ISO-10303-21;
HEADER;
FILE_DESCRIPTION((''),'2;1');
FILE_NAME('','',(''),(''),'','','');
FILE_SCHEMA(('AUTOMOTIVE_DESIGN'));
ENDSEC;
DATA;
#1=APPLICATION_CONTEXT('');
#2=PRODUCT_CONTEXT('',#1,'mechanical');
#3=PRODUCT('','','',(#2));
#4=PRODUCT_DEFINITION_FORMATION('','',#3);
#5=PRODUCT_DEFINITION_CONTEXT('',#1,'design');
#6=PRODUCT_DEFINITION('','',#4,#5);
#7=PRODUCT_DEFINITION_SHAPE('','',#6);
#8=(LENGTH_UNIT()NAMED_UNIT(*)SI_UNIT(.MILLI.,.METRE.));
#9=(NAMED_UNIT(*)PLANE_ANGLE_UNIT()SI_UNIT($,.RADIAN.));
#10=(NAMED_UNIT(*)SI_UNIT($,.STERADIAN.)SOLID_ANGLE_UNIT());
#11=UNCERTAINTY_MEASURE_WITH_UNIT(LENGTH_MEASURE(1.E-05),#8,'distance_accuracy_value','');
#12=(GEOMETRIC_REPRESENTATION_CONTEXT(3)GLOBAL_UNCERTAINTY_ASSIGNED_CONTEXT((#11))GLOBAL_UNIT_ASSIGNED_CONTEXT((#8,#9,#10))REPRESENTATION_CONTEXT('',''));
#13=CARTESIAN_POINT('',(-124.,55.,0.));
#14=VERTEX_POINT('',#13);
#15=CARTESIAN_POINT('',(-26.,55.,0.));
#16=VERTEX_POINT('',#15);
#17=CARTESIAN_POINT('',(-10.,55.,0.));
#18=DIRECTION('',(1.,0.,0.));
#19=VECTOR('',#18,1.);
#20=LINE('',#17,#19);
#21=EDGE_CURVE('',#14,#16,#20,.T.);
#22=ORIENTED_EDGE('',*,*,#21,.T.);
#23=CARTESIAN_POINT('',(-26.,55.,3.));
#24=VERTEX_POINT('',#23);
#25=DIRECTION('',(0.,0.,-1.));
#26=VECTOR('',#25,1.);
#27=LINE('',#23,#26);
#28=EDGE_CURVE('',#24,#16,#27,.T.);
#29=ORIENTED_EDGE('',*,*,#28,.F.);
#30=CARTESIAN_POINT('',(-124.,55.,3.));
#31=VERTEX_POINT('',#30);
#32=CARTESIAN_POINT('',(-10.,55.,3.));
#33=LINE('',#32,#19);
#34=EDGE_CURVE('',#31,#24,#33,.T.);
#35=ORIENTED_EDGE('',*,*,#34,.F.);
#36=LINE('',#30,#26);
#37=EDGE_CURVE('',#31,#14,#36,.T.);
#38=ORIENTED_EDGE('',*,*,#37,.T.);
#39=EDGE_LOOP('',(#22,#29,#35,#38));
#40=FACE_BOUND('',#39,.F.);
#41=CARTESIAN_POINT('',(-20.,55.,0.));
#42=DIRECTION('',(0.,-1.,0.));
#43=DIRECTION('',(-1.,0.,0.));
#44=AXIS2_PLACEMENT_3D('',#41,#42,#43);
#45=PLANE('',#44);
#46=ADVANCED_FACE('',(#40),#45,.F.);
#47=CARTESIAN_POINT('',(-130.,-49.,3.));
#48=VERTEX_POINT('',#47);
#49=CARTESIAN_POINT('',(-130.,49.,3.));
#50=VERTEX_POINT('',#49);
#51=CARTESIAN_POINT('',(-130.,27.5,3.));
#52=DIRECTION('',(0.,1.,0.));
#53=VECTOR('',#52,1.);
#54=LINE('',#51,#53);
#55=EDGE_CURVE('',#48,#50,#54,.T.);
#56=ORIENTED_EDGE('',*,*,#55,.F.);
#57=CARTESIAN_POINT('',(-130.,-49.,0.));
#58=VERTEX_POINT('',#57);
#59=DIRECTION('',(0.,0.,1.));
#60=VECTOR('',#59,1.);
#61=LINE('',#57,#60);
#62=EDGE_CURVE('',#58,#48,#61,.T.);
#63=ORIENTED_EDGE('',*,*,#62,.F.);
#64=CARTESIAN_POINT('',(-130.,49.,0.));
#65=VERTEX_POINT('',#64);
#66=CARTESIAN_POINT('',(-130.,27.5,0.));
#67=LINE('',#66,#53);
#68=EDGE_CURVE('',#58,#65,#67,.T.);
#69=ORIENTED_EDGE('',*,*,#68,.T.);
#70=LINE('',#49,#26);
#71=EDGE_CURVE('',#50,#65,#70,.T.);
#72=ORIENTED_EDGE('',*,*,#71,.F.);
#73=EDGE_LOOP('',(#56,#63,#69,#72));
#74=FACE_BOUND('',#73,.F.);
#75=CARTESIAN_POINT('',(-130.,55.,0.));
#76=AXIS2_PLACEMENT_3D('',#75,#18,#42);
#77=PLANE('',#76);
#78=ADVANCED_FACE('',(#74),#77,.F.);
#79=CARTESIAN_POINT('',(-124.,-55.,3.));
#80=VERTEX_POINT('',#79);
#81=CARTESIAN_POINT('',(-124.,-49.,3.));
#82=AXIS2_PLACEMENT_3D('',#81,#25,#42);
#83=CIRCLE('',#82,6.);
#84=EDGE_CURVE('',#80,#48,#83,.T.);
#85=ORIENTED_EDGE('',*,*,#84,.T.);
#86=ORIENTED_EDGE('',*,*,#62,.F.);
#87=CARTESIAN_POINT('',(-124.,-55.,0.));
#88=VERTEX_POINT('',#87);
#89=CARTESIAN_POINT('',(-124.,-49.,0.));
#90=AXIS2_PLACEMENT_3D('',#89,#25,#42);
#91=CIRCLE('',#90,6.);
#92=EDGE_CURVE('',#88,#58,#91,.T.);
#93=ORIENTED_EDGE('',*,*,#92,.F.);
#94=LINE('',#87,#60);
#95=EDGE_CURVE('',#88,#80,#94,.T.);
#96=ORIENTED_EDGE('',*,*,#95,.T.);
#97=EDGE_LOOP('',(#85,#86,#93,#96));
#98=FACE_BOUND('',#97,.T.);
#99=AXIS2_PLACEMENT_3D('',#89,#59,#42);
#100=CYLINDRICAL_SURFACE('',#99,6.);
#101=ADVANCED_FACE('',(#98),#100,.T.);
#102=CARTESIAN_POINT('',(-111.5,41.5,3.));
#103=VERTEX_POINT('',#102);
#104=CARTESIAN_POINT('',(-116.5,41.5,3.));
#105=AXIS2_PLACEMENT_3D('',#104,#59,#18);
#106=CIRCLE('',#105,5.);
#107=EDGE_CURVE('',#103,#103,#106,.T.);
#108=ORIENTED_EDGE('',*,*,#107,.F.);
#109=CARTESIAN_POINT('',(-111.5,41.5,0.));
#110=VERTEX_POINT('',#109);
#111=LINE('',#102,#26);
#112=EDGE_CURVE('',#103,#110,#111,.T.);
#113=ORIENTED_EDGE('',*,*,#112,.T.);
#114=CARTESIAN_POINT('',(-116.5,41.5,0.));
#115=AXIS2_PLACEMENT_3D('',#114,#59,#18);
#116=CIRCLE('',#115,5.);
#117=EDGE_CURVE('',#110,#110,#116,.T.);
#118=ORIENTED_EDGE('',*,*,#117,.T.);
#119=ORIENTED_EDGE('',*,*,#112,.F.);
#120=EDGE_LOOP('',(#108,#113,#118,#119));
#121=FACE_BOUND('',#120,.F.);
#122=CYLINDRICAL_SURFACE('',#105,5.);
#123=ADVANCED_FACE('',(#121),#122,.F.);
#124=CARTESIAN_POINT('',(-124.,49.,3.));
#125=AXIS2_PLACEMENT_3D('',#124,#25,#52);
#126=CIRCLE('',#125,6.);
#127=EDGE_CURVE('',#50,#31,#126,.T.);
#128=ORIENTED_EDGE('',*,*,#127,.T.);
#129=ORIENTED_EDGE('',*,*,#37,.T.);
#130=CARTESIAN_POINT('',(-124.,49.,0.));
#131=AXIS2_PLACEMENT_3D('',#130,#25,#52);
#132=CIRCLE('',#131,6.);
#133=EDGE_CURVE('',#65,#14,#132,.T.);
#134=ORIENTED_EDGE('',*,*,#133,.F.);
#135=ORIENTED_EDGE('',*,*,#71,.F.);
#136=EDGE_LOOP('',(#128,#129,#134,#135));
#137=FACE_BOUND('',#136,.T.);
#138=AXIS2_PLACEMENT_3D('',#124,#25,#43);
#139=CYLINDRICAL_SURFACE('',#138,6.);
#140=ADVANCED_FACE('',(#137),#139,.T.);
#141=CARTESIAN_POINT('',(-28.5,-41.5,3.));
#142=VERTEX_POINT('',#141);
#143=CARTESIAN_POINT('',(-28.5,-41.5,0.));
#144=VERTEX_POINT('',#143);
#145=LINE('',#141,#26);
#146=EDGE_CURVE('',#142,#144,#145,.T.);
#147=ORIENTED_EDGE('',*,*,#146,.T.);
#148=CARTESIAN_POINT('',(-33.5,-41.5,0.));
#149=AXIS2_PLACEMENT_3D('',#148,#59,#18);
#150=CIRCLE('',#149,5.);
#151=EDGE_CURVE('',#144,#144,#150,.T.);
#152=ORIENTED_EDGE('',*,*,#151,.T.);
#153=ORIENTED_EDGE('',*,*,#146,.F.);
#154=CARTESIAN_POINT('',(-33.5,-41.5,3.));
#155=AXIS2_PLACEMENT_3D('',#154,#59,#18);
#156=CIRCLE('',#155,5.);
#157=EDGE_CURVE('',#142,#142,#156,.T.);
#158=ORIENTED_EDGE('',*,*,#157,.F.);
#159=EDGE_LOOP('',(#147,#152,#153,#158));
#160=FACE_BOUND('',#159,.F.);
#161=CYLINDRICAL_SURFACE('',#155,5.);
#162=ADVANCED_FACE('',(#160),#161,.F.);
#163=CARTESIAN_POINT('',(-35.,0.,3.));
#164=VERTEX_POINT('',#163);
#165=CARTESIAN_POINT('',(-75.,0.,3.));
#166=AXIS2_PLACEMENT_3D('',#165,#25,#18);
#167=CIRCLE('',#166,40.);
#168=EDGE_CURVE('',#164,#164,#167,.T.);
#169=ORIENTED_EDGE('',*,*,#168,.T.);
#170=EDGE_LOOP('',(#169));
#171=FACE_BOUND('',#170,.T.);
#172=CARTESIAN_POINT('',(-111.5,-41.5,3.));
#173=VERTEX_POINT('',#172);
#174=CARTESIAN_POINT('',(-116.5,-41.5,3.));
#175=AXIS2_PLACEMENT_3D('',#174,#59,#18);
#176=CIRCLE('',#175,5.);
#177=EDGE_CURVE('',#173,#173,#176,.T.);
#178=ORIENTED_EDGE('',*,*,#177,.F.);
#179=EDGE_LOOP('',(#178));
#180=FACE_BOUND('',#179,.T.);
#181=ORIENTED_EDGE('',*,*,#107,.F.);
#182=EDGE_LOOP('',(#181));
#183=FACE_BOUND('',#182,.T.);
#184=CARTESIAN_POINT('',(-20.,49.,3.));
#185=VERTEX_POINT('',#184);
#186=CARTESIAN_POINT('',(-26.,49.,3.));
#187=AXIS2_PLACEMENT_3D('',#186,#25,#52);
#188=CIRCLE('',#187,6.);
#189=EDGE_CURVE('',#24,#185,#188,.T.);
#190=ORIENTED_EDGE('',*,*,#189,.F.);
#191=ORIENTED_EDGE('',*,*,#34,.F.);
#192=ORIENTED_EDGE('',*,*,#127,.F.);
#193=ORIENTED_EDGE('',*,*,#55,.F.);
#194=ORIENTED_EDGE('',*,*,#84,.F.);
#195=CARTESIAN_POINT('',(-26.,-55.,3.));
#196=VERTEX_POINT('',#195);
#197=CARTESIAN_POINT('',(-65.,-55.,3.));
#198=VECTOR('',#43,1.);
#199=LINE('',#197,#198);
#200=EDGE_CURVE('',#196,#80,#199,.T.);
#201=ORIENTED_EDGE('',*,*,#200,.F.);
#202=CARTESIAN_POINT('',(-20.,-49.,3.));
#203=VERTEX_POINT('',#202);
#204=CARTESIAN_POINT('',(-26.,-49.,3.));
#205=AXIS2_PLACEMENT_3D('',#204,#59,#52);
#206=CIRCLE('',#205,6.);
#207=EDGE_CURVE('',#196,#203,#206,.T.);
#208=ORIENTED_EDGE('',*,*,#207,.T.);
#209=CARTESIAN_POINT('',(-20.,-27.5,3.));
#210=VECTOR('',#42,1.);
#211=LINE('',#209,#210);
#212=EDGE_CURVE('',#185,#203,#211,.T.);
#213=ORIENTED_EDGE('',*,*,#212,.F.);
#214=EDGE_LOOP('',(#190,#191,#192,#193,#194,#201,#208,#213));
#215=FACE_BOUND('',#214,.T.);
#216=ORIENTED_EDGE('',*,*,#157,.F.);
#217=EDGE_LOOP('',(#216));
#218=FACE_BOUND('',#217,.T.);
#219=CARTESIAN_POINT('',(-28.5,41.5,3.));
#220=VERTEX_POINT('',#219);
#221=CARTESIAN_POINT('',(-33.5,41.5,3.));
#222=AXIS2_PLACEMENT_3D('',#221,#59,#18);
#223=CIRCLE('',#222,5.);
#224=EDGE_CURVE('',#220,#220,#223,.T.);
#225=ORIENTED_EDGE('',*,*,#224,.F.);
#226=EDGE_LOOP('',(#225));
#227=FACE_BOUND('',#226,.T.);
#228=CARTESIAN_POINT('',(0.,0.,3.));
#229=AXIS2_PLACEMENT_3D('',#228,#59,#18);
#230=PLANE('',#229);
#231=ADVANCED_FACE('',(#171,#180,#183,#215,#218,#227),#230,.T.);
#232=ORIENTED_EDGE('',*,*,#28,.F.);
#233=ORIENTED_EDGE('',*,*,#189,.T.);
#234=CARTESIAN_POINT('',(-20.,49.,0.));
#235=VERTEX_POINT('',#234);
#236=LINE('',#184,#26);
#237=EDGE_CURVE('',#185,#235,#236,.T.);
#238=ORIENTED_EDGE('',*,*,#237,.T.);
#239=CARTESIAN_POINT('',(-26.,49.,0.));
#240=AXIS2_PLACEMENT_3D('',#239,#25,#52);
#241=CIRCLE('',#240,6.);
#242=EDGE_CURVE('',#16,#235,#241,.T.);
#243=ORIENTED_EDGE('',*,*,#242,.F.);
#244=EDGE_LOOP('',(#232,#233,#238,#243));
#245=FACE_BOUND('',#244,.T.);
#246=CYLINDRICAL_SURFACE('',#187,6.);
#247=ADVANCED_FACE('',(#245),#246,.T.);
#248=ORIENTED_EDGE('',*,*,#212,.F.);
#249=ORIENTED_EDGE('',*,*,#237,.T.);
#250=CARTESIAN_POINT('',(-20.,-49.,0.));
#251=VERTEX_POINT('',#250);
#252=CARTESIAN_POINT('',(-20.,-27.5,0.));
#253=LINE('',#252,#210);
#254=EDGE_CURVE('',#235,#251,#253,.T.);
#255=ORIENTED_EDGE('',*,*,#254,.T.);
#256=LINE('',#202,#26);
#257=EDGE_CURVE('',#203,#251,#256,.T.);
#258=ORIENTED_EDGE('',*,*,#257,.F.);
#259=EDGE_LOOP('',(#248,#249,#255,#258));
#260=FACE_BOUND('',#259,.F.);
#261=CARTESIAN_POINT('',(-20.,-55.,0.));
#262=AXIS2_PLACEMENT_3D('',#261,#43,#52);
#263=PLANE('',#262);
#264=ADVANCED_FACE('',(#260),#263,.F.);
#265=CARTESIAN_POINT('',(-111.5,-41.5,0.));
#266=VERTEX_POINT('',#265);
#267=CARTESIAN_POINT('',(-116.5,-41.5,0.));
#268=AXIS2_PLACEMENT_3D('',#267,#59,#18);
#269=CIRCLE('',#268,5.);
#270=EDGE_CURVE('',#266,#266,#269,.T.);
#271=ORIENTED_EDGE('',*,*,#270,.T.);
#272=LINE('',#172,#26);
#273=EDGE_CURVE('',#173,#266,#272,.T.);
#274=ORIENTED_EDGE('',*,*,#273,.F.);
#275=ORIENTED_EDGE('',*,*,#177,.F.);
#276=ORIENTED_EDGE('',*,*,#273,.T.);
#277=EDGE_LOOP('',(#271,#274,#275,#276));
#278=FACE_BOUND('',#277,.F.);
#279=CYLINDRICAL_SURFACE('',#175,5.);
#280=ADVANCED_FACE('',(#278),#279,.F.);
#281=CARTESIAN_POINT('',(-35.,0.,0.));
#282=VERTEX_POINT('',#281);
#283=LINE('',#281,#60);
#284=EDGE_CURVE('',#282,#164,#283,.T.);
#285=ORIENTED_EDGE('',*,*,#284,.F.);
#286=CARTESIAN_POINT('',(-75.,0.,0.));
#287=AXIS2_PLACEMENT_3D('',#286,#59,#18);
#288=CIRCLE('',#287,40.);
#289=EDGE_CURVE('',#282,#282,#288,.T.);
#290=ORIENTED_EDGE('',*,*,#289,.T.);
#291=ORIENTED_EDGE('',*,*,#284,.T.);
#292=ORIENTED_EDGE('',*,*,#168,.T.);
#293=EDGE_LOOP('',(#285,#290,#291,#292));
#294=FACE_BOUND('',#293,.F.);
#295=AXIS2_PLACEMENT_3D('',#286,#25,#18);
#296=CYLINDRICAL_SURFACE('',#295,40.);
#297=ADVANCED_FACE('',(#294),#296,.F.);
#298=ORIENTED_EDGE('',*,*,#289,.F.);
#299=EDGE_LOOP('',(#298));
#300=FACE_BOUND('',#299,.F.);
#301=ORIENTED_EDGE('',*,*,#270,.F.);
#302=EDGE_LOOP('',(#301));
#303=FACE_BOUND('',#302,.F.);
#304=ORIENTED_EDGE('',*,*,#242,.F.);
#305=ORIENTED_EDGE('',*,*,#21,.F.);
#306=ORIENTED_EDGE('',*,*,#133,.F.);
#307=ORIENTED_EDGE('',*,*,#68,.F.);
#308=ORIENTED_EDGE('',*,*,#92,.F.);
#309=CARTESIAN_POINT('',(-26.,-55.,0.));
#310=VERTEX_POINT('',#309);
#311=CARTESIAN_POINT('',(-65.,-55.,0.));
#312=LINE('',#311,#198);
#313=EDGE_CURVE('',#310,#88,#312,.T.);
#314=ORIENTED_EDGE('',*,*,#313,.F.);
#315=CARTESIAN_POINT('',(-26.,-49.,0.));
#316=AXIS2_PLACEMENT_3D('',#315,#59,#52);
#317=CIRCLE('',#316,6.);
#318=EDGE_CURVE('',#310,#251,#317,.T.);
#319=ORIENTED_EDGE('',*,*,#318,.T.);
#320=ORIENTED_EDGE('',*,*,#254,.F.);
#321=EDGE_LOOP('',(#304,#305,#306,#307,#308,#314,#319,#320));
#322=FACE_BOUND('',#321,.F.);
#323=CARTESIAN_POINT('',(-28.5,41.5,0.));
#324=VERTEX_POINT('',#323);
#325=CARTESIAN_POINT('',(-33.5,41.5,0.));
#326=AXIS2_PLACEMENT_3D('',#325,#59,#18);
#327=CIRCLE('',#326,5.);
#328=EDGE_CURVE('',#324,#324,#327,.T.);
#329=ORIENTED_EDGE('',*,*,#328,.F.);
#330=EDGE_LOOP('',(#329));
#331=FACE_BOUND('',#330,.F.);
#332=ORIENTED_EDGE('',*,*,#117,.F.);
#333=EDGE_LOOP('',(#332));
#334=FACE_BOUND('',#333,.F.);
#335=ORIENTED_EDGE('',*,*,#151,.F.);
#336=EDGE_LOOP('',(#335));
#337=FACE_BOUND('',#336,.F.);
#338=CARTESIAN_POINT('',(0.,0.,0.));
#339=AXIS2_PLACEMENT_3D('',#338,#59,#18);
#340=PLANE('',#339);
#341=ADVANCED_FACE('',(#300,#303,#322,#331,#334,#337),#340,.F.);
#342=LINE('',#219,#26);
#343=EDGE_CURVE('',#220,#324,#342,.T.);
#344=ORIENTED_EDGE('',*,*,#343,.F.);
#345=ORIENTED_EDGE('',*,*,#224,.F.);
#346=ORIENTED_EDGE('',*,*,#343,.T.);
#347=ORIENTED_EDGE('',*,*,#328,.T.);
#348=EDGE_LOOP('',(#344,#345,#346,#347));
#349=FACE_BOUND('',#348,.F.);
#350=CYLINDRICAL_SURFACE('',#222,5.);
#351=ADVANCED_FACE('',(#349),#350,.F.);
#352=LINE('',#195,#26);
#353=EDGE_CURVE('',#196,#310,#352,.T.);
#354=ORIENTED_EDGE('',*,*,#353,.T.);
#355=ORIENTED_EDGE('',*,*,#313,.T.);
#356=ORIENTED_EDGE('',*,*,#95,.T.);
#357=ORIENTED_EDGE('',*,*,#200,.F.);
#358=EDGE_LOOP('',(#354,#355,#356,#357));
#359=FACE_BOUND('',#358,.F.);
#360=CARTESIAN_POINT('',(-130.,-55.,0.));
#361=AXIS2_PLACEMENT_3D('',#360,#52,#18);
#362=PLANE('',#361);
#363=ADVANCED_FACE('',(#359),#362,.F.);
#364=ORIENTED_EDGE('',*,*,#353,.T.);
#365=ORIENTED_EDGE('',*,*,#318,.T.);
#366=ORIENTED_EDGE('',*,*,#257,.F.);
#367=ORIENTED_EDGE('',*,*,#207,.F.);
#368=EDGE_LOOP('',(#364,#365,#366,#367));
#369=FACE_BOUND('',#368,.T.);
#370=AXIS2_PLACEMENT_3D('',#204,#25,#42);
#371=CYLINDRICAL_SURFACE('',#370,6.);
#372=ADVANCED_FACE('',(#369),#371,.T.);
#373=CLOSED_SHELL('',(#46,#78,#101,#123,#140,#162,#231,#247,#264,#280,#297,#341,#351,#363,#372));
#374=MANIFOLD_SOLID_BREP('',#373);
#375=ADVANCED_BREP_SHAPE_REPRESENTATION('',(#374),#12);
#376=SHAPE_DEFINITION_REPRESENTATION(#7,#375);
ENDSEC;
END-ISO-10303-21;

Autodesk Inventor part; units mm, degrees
ref_plane "YZ Plane" through (0, 0, 0) normal (1, 0, 0) x (0, 1, 0)
ref_plane "XZ Plane" through (0, 0, 0) normal (0, 1, 0) x (-1, 0, 0)
ref_plane "XY Plane" through (0, 0, 0) normal (0, 0, 1) x (1, 0, 0)
sketch "Sketch1" plane through (0, 0, 0) normal (0, 0, 1) x (1, 0, 0)
  line L0 (-200, 100) -> (200, 100)
  line L1 (200, 100) -> (200, -100)
  line L2 (200, -100) -> (-200, -100)
  line L3 (-200, -100) -> (-200, 100)
  line L4 (-200, 100) -> (200, -100) construction
  line L5 (200, 100) -> (-200, -100) construction
  point P0 (0, 0)
  point P1 (0, 0)
  point P2 (0, 0)
  dimension "d25" = 400
  dimension "d26" = 200
extrude "Plate1" add sketch "Sketch1" along normal blind 3
sketch "Sketch5" plane through (-197, -100, 0) normal (-1, 0, 0) x (0, -1, 0)
  line L0 (-200, 0) -> (0, 0)
  line L1 (0, 0) -> (0, 50)
  line L2 (0, 50) -> (-200, 50)
  line L3 (-200, 50) -> (-200, 0)
edge flange "Flange2" height 50 angle 90 thickness 3 bend radius 5 thickness toward (-1, 0, 0) relief round relief width 3 relief depth 1.5 corner gap 5 corner form 0 edges at (-200, 0, 3) (200, 0, 3) (0, 100, 3) (0, -100, 3) wall of the first edge with corners at (-197, 100, 0) (-197, -100, 0) (-197, -100, 50) (-197, 100, 50)
bend "Bend2"
corner "Corner2"
sketch "Sketch6" plane through (0, 0, 3) normal (0, 0, 1) x (1, 0, 0)
  circle A0 centre (-75, 0) radius 16
  circle A1 centre (75, 0) radius 16
  line L0 (0, 0) -> (0, 55.0725) construction
  circle A2 centre (33.5, 41.5) radius 5
  circle A3 centre (116.5, 41.5) radius 5
  circle A4 centre (116.5, -41.5) radius 5
  circle A5 centre (33.5, -41.5) radius 5
  line L1 (75, 0) -> (-75, 0)
  line L2 (75, 0) -> (75, -40.8866)
  circle A6 centre (-33.5, 41.5) radius 5
  circle A7 centre (-116.5, 41.5) radius 5
  circle A8 centre (-116.5, -41.5) radius 5
  circle A9 centre (-33.5, -41.5) radius 5
  point P0 (-75, -40.8866)
  dimension "d37" = 32
  dimension "d38" = 150
  dimension "d55" = 10
  dimension "d56" = 83
  dimension "d57" = 83
extrude "Cut1" cut sketch "Sketch6" against normal blind 3
sketch "Sketch7" plane through (-196.2929, 100, 8) normal (0, 1, 0) x (1, 0, 0)
  circle A0 centre (196.2929, -20) radius 6.5
  line L0 (5, 5) -> (387.5858, 5) projected
  line L1 (387.5858, 5) -> (388.2929, 5) projected
  line L2 (388.2929, 5) -> (387.5858, 5) projected
  line L3 (387.5858, 5) -> (5, 5) projected
  line L4 (5, 5) -> (4.2929, 5) projected
  line L5 (4.2929, 5) -> (5, 5) projected
  point P0 (196.2929, 8)
  dimension "d41" = 13
  dimension "d42" = 25
extrude "Extrusion2" cut sketch "Sketch7" against normal through all
pattern_linear "Rectangular Pattern1" count 3 spacing 162 along (-1, 0, 0) of "Extrusion2" first direction both ways yes
sketch "Sketch8" plane through (0, 0, 0) normal (1, 0, 0) x (0, 1, 0)
  line L0 (-96.2929, 50) -> (96.2929, 50) projected
  circle A0 centre (0, 28) radius 6.5
  line L1 (91.2929, 3) -> (-91.2929, 3) projected
  point P0 (0, 0)
  dimension "d48" = 13
  dimension "d49" = 25
extrude "Extrusion3" cut sketch "Sketch8" along normal through all both and the other way through all
pattern_linear "Rectangular Pattern2" count 3 spacing 72 along (0, 1, 0) of "Extrusion3" first direction both ways yes
sketch "Sketch9" plane through (0, 0, 0) normal (0, 0, 1) x (1, 0, 0)
  line L0 (-233.1694, -164.5287) -> (298.5547, -164.5287)
  line L1 (298.5547, -164.5287) -> (298.5547, 258.31)
  line L2 (298.5547, 258.31) -> (-233.1694, 258.31)
  line L3 (-233.1694, 258.31) -> (-233.1694, -164.5287)
  circle A0 centre (-75, 0) radius 16 projected
  line L4 (-130, -55) -> (-20, -55)
  line L5 (-20, -55) -> (-20, 55)
  line L6 (-20, 55) -> (-130, 55)
  line L7 (-130, 55) -> (-130, -55)
  line L8 (-130, -55) -> (-20, 55) construction
  line L9 (-20, -55) -> (-130, 55) construction
  circle A1 centre (-75, 0) radius 40
  point P0 (0, 0)
  dimension "d58" = 110
  dimension "d59" = 110
  dimension "d60" = 80
extrude "Extrusion4" cut sketch "Sketch9" along normal through all both and the other way through all
fillet "Corner Round1" radius 6 4 edges at (-130, -55, 1.5) (-130, 55, 1.5) (-20, 55, 1.5) (-20, -55, 1.5)
equation "\"d25\" = Гриндер_проходная_ширина + 2 * Гриндер_размер_фланца"
equation "\"d26\" = Гриндер_высота"
equation "\"d38\" = Гриндер_Валы_между_центрами"
equation "\"d57\" = d56"
equation "\"d39\" = Thickness"
equation "\"d41\" = Гриндер_диам_отврс_корпуса"
equation "\"d42\" = Гриндер_отступ_отврс_корпуса"
equation "\"d48\" = Гриндер_диам_отврс_корпуса"
equation "\"d49\" = Гриндер_отступ_отврс_корпуса"
equation "\"d2\" = Thickness"
equation "\"d27\" = BendReliefWidth"
equation "\"d28\" = BendReliefDepth"
equation "\"d29\" = MinimumRemnant"
equation "\"d30\" = TransitionRadius"
equation "\"d33\" = BendRadius"
equation "\"d34\" = CornerReliefSize"
equation "\"d36\" = JacobiRadiusSize"
equation "\"BendReliefWidth\" = Thickness"
equation "\"BendReliefDepth\" = 0.5 * Thickness"
equation "\"CornerReliefSize\" = 4 * Thickness"
equation "\"MinimumRemnant\" = 2 * Thickness"
equation "\"TransitionRadius\" = BendRadius"
equation "\"JacobiRadiusSize\" = BendRadius"
equation "\"GapSize\" = Thickness"
equation "\"Гриндер_отступ_отврс_корпуса\" = 25"
equation "\"Гриндер_диам_отврс_корпуса\" = 13"
equation "\"Гриндер_проходная_ширина\" = 320"
equation "\"Гриндер_проходная_длина\" = 320"
equation "\"Гриндер_высота\" = 200"
equation "\"Гриндер_размер_фланца\" = 40"
equation "\"Гриндер_Валы_между_центрами\" = 150"
equation "\"Thickness\" = 3"
equation "\"BendRadius\" = 5"
properties part number "NDM-VOS 161 harrow plate" material "Stainless Steel"
